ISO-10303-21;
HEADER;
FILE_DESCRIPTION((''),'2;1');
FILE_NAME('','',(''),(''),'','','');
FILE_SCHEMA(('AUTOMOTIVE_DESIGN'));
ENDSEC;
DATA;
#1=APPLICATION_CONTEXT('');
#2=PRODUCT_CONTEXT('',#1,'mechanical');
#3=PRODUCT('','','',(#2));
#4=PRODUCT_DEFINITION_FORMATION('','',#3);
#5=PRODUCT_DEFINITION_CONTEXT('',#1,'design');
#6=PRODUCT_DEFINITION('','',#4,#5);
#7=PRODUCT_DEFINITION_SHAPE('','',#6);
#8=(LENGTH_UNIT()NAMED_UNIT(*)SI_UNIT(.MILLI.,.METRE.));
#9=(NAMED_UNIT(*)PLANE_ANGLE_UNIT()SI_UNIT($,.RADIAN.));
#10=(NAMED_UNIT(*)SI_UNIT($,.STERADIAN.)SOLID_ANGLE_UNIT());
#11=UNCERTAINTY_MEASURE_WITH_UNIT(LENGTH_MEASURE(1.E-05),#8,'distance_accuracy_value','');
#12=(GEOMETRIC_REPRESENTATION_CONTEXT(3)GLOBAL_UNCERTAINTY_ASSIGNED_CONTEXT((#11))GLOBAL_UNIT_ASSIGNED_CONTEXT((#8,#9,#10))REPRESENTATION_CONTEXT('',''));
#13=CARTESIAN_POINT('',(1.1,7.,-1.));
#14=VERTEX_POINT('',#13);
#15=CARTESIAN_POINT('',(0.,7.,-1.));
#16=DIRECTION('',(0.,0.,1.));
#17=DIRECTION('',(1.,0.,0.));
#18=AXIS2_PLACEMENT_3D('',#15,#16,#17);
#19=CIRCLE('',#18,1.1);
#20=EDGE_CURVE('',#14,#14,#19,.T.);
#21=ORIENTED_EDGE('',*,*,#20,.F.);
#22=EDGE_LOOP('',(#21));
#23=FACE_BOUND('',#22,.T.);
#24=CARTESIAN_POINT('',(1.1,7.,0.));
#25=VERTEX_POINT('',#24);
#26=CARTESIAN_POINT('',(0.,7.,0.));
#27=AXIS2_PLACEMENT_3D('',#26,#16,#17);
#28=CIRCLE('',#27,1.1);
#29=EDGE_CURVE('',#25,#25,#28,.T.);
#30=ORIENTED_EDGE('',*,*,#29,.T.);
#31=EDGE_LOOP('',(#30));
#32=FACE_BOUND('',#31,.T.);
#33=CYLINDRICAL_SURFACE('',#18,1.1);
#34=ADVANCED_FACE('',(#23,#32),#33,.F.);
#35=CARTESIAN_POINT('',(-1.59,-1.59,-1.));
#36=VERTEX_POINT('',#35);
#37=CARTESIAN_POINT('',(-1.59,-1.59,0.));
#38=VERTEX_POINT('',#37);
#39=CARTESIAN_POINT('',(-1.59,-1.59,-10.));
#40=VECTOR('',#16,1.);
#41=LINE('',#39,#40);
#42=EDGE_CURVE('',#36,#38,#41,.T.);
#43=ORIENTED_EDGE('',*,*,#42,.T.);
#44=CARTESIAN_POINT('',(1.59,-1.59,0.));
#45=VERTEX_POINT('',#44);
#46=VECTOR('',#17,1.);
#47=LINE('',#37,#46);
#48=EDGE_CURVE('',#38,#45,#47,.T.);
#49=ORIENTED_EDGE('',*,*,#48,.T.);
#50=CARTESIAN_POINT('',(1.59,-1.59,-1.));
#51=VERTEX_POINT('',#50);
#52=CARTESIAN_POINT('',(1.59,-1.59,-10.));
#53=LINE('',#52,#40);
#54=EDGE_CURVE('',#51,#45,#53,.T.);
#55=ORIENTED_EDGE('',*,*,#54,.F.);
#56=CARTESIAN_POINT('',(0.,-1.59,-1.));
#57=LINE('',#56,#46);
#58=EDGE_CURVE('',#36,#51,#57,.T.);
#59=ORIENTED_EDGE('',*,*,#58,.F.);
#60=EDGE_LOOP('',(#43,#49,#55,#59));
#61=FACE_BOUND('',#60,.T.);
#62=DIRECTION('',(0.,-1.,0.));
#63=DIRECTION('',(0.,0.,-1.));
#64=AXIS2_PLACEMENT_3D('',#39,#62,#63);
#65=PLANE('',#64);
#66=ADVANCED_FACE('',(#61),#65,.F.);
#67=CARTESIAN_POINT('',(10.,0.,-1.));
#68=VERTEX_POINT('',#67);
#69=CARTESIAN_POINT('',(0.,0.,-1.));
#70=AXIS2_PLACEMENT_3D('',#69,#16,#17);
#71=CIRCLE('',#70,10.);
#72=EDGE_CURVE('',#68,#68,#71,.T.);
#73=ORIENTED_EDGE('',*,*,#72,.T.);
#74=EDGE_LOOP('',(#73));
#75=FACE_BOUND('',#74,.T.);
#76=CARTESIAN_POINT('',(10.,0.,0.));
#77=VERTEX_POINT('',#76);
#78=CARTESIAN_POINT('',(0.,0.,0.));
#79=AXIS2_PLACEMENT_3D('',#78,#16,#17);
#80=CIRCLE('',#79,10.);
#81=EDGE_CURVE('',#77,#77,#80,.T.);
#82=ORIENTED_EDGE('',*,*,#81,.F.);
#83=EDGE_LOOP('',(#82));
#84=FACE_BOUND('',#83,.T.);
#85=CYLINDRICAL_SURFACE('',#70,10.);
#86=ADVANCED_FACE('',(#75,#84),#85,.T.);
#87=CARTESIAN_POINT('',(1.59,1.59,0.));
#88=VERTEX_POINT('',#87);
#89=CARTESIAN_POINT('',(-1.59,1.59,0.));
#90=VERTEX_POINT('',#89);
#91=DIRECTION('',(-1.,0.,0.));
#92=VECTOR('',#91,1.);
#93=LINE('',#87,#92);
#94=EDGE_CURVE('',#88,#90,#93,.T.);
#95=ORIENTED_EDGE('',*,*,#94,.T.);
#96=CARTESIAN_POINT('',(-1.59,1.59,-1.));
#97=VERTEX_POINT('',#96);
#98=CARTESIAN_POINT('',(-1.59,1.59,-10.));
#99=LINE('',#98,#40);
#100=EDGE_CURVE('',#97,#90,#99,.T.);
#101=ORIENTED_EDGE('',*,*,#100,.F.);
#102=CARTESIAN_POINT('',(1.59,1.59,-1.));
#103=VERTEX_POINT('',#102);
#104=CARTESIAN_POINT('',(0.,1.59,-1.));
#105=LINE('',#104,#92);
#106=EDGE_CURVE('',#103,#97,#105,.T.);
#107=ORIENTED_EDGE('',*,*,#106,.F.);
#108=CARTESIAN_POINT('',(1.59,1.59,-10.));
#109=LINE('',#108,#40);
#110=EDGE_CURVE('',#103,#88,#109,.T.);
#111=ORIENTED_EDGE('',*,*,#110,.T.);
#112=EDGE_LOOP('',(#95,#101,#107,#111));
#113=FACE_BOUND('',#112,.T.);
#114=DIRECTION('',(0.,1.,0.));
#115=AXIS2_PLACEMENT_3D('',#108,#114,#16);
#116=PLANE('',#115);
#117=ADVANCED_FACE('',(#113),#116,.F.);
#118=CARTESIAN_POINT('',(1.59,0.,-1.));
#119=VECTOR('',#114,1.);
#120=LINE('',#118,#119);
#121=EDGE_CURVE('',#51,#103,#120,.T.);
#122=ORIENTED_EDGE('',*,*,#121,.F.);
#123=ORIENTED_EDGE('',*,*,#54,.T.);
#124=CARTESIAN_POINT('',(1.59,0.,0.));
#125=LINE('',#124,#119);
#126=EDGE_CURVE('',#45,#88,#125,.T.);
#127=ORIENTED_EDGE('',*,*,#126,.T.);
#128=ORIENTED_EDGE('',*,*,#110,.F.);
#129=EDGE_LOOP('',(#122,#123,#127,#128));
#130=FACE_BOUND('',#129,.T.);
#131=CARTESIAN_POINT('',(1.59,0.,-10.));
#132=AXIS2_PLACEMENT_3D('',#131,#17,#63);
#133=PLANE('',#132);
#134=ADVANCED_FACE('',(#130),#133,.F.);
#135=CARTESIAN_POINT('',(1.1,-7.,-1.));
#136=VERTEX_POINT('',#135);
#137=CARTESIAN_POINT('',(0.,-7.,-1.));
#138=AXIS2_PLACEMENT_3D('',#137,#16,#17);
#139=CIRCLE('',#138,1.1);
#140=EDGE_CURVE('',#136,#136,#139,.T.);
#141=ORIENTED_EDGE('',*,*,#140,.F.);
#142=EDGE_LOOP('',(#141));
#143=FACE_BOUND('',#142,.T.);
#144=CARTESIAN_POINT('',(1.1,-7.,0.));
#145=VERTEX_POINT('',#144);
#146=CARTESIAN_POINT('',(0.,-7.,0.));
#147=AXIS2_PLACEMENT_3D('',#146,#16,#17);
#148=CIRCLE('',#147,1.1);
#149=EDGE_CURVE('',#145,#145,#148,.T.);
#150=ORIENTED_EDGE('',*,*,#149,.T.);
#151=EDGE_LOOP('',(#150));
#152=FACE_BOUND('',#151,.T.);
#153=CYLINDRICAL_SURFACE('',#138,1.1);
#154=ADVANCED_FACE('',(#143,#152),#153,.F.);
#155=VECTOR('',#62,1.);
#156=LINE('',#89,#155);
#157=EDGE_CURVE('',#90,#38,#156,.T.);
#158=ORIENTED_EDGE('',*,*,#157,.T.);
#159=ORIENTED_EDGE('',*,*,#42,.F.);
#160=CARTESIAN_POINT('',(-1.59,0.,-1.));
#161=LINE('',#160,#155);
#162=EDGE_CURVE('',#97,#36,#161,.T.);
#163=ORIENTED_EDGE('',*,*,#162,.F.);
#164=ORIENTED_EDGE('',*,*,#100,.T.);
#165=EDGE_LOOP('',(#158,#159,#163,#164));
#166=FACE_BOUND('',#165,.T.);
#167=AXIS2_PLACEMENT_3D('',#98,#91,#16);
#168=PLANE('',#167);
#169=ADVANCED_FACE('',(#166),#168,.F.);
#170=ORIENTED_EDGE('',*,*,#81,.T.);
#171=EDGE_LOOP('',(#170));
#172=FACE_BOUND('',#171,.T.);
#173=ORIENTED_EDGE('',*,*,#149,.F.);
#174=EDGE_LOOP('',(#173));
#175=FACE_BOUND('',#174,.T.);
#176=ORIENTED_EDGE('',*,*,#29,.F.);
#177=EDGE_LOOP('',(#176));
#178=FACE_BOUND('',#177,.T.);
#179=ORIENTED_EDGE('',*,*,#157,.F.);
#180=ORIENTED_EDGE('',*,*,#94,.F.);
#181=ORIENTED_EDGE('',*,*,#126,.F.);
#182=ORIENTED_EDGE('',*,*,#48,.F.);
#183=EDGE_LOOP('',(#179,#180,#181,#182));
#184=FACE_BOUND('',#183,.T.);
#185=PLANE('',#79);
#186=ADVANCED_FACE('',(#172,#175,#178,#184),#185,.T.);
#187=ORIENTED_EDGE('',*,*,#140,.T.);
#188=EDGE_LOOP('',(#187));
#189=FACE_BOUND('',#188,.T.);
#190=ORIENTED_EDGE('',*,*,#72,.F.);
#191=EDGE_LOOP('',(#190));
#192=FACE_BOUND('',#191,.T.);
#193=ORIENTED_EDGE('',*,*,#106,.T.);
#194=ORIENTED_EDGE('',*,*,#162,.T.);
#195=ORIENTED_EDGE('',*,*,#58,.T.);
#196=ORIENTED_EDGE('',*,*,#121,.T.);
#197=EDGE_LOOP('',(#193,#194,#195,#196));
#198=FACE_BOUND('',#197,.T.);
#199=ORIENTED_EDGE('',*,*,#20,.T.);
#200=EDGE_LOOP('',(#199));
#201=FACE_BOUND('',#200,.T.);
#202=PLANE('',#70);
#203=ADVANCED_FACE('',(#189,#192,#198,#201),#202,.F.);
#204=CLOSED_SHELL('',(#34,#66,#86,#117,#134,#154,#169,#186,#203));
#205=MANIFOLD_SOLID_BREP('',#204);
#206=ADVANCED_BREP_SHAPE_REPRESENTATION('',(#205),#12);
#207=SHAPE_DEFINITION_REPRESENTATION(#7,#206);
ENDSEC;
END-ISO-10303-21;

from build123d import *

# Parameters (mm, degrees)
SKETCH1_R          = 10
SKETCH1_R_2        = 1.1
BASE_FLANGE1_DEPTH = 1
CUT_EXTRUDE1_DEPTH = 10


# Sheet-metal steps are written as plain solids
with BuildPart() as part:
    # Sketch1 → Base-Flange1 (new body)
    with BuildSketch(Plane.XY):
        Circle(SKETCH1_R)
        with Locations((0, 7)):
            Circle(SKETCH1_R_2, mode=Mode.SUBTRACT)
        with Locations((0, -7)):
            Circle(SKETCH1_R_2, mode=Mode.SUBTRACT)
    extrude(amount=-BASE_FLANGE1_DEPTH)

    # Sketch6 → Cut-Extrude1 (cut)
    with BuildSketch(Plane.XY):
        Polygon((1.59, 0), (1.59, 1.59), (-1.59, 1.59), (-1.59, -1.59), (1.59, -1.59), align=None)
    extrude(amount=-CUT_EXTRUDE1_DEPTH, mode=Mode.SUBTRACT)


solid = part.part
